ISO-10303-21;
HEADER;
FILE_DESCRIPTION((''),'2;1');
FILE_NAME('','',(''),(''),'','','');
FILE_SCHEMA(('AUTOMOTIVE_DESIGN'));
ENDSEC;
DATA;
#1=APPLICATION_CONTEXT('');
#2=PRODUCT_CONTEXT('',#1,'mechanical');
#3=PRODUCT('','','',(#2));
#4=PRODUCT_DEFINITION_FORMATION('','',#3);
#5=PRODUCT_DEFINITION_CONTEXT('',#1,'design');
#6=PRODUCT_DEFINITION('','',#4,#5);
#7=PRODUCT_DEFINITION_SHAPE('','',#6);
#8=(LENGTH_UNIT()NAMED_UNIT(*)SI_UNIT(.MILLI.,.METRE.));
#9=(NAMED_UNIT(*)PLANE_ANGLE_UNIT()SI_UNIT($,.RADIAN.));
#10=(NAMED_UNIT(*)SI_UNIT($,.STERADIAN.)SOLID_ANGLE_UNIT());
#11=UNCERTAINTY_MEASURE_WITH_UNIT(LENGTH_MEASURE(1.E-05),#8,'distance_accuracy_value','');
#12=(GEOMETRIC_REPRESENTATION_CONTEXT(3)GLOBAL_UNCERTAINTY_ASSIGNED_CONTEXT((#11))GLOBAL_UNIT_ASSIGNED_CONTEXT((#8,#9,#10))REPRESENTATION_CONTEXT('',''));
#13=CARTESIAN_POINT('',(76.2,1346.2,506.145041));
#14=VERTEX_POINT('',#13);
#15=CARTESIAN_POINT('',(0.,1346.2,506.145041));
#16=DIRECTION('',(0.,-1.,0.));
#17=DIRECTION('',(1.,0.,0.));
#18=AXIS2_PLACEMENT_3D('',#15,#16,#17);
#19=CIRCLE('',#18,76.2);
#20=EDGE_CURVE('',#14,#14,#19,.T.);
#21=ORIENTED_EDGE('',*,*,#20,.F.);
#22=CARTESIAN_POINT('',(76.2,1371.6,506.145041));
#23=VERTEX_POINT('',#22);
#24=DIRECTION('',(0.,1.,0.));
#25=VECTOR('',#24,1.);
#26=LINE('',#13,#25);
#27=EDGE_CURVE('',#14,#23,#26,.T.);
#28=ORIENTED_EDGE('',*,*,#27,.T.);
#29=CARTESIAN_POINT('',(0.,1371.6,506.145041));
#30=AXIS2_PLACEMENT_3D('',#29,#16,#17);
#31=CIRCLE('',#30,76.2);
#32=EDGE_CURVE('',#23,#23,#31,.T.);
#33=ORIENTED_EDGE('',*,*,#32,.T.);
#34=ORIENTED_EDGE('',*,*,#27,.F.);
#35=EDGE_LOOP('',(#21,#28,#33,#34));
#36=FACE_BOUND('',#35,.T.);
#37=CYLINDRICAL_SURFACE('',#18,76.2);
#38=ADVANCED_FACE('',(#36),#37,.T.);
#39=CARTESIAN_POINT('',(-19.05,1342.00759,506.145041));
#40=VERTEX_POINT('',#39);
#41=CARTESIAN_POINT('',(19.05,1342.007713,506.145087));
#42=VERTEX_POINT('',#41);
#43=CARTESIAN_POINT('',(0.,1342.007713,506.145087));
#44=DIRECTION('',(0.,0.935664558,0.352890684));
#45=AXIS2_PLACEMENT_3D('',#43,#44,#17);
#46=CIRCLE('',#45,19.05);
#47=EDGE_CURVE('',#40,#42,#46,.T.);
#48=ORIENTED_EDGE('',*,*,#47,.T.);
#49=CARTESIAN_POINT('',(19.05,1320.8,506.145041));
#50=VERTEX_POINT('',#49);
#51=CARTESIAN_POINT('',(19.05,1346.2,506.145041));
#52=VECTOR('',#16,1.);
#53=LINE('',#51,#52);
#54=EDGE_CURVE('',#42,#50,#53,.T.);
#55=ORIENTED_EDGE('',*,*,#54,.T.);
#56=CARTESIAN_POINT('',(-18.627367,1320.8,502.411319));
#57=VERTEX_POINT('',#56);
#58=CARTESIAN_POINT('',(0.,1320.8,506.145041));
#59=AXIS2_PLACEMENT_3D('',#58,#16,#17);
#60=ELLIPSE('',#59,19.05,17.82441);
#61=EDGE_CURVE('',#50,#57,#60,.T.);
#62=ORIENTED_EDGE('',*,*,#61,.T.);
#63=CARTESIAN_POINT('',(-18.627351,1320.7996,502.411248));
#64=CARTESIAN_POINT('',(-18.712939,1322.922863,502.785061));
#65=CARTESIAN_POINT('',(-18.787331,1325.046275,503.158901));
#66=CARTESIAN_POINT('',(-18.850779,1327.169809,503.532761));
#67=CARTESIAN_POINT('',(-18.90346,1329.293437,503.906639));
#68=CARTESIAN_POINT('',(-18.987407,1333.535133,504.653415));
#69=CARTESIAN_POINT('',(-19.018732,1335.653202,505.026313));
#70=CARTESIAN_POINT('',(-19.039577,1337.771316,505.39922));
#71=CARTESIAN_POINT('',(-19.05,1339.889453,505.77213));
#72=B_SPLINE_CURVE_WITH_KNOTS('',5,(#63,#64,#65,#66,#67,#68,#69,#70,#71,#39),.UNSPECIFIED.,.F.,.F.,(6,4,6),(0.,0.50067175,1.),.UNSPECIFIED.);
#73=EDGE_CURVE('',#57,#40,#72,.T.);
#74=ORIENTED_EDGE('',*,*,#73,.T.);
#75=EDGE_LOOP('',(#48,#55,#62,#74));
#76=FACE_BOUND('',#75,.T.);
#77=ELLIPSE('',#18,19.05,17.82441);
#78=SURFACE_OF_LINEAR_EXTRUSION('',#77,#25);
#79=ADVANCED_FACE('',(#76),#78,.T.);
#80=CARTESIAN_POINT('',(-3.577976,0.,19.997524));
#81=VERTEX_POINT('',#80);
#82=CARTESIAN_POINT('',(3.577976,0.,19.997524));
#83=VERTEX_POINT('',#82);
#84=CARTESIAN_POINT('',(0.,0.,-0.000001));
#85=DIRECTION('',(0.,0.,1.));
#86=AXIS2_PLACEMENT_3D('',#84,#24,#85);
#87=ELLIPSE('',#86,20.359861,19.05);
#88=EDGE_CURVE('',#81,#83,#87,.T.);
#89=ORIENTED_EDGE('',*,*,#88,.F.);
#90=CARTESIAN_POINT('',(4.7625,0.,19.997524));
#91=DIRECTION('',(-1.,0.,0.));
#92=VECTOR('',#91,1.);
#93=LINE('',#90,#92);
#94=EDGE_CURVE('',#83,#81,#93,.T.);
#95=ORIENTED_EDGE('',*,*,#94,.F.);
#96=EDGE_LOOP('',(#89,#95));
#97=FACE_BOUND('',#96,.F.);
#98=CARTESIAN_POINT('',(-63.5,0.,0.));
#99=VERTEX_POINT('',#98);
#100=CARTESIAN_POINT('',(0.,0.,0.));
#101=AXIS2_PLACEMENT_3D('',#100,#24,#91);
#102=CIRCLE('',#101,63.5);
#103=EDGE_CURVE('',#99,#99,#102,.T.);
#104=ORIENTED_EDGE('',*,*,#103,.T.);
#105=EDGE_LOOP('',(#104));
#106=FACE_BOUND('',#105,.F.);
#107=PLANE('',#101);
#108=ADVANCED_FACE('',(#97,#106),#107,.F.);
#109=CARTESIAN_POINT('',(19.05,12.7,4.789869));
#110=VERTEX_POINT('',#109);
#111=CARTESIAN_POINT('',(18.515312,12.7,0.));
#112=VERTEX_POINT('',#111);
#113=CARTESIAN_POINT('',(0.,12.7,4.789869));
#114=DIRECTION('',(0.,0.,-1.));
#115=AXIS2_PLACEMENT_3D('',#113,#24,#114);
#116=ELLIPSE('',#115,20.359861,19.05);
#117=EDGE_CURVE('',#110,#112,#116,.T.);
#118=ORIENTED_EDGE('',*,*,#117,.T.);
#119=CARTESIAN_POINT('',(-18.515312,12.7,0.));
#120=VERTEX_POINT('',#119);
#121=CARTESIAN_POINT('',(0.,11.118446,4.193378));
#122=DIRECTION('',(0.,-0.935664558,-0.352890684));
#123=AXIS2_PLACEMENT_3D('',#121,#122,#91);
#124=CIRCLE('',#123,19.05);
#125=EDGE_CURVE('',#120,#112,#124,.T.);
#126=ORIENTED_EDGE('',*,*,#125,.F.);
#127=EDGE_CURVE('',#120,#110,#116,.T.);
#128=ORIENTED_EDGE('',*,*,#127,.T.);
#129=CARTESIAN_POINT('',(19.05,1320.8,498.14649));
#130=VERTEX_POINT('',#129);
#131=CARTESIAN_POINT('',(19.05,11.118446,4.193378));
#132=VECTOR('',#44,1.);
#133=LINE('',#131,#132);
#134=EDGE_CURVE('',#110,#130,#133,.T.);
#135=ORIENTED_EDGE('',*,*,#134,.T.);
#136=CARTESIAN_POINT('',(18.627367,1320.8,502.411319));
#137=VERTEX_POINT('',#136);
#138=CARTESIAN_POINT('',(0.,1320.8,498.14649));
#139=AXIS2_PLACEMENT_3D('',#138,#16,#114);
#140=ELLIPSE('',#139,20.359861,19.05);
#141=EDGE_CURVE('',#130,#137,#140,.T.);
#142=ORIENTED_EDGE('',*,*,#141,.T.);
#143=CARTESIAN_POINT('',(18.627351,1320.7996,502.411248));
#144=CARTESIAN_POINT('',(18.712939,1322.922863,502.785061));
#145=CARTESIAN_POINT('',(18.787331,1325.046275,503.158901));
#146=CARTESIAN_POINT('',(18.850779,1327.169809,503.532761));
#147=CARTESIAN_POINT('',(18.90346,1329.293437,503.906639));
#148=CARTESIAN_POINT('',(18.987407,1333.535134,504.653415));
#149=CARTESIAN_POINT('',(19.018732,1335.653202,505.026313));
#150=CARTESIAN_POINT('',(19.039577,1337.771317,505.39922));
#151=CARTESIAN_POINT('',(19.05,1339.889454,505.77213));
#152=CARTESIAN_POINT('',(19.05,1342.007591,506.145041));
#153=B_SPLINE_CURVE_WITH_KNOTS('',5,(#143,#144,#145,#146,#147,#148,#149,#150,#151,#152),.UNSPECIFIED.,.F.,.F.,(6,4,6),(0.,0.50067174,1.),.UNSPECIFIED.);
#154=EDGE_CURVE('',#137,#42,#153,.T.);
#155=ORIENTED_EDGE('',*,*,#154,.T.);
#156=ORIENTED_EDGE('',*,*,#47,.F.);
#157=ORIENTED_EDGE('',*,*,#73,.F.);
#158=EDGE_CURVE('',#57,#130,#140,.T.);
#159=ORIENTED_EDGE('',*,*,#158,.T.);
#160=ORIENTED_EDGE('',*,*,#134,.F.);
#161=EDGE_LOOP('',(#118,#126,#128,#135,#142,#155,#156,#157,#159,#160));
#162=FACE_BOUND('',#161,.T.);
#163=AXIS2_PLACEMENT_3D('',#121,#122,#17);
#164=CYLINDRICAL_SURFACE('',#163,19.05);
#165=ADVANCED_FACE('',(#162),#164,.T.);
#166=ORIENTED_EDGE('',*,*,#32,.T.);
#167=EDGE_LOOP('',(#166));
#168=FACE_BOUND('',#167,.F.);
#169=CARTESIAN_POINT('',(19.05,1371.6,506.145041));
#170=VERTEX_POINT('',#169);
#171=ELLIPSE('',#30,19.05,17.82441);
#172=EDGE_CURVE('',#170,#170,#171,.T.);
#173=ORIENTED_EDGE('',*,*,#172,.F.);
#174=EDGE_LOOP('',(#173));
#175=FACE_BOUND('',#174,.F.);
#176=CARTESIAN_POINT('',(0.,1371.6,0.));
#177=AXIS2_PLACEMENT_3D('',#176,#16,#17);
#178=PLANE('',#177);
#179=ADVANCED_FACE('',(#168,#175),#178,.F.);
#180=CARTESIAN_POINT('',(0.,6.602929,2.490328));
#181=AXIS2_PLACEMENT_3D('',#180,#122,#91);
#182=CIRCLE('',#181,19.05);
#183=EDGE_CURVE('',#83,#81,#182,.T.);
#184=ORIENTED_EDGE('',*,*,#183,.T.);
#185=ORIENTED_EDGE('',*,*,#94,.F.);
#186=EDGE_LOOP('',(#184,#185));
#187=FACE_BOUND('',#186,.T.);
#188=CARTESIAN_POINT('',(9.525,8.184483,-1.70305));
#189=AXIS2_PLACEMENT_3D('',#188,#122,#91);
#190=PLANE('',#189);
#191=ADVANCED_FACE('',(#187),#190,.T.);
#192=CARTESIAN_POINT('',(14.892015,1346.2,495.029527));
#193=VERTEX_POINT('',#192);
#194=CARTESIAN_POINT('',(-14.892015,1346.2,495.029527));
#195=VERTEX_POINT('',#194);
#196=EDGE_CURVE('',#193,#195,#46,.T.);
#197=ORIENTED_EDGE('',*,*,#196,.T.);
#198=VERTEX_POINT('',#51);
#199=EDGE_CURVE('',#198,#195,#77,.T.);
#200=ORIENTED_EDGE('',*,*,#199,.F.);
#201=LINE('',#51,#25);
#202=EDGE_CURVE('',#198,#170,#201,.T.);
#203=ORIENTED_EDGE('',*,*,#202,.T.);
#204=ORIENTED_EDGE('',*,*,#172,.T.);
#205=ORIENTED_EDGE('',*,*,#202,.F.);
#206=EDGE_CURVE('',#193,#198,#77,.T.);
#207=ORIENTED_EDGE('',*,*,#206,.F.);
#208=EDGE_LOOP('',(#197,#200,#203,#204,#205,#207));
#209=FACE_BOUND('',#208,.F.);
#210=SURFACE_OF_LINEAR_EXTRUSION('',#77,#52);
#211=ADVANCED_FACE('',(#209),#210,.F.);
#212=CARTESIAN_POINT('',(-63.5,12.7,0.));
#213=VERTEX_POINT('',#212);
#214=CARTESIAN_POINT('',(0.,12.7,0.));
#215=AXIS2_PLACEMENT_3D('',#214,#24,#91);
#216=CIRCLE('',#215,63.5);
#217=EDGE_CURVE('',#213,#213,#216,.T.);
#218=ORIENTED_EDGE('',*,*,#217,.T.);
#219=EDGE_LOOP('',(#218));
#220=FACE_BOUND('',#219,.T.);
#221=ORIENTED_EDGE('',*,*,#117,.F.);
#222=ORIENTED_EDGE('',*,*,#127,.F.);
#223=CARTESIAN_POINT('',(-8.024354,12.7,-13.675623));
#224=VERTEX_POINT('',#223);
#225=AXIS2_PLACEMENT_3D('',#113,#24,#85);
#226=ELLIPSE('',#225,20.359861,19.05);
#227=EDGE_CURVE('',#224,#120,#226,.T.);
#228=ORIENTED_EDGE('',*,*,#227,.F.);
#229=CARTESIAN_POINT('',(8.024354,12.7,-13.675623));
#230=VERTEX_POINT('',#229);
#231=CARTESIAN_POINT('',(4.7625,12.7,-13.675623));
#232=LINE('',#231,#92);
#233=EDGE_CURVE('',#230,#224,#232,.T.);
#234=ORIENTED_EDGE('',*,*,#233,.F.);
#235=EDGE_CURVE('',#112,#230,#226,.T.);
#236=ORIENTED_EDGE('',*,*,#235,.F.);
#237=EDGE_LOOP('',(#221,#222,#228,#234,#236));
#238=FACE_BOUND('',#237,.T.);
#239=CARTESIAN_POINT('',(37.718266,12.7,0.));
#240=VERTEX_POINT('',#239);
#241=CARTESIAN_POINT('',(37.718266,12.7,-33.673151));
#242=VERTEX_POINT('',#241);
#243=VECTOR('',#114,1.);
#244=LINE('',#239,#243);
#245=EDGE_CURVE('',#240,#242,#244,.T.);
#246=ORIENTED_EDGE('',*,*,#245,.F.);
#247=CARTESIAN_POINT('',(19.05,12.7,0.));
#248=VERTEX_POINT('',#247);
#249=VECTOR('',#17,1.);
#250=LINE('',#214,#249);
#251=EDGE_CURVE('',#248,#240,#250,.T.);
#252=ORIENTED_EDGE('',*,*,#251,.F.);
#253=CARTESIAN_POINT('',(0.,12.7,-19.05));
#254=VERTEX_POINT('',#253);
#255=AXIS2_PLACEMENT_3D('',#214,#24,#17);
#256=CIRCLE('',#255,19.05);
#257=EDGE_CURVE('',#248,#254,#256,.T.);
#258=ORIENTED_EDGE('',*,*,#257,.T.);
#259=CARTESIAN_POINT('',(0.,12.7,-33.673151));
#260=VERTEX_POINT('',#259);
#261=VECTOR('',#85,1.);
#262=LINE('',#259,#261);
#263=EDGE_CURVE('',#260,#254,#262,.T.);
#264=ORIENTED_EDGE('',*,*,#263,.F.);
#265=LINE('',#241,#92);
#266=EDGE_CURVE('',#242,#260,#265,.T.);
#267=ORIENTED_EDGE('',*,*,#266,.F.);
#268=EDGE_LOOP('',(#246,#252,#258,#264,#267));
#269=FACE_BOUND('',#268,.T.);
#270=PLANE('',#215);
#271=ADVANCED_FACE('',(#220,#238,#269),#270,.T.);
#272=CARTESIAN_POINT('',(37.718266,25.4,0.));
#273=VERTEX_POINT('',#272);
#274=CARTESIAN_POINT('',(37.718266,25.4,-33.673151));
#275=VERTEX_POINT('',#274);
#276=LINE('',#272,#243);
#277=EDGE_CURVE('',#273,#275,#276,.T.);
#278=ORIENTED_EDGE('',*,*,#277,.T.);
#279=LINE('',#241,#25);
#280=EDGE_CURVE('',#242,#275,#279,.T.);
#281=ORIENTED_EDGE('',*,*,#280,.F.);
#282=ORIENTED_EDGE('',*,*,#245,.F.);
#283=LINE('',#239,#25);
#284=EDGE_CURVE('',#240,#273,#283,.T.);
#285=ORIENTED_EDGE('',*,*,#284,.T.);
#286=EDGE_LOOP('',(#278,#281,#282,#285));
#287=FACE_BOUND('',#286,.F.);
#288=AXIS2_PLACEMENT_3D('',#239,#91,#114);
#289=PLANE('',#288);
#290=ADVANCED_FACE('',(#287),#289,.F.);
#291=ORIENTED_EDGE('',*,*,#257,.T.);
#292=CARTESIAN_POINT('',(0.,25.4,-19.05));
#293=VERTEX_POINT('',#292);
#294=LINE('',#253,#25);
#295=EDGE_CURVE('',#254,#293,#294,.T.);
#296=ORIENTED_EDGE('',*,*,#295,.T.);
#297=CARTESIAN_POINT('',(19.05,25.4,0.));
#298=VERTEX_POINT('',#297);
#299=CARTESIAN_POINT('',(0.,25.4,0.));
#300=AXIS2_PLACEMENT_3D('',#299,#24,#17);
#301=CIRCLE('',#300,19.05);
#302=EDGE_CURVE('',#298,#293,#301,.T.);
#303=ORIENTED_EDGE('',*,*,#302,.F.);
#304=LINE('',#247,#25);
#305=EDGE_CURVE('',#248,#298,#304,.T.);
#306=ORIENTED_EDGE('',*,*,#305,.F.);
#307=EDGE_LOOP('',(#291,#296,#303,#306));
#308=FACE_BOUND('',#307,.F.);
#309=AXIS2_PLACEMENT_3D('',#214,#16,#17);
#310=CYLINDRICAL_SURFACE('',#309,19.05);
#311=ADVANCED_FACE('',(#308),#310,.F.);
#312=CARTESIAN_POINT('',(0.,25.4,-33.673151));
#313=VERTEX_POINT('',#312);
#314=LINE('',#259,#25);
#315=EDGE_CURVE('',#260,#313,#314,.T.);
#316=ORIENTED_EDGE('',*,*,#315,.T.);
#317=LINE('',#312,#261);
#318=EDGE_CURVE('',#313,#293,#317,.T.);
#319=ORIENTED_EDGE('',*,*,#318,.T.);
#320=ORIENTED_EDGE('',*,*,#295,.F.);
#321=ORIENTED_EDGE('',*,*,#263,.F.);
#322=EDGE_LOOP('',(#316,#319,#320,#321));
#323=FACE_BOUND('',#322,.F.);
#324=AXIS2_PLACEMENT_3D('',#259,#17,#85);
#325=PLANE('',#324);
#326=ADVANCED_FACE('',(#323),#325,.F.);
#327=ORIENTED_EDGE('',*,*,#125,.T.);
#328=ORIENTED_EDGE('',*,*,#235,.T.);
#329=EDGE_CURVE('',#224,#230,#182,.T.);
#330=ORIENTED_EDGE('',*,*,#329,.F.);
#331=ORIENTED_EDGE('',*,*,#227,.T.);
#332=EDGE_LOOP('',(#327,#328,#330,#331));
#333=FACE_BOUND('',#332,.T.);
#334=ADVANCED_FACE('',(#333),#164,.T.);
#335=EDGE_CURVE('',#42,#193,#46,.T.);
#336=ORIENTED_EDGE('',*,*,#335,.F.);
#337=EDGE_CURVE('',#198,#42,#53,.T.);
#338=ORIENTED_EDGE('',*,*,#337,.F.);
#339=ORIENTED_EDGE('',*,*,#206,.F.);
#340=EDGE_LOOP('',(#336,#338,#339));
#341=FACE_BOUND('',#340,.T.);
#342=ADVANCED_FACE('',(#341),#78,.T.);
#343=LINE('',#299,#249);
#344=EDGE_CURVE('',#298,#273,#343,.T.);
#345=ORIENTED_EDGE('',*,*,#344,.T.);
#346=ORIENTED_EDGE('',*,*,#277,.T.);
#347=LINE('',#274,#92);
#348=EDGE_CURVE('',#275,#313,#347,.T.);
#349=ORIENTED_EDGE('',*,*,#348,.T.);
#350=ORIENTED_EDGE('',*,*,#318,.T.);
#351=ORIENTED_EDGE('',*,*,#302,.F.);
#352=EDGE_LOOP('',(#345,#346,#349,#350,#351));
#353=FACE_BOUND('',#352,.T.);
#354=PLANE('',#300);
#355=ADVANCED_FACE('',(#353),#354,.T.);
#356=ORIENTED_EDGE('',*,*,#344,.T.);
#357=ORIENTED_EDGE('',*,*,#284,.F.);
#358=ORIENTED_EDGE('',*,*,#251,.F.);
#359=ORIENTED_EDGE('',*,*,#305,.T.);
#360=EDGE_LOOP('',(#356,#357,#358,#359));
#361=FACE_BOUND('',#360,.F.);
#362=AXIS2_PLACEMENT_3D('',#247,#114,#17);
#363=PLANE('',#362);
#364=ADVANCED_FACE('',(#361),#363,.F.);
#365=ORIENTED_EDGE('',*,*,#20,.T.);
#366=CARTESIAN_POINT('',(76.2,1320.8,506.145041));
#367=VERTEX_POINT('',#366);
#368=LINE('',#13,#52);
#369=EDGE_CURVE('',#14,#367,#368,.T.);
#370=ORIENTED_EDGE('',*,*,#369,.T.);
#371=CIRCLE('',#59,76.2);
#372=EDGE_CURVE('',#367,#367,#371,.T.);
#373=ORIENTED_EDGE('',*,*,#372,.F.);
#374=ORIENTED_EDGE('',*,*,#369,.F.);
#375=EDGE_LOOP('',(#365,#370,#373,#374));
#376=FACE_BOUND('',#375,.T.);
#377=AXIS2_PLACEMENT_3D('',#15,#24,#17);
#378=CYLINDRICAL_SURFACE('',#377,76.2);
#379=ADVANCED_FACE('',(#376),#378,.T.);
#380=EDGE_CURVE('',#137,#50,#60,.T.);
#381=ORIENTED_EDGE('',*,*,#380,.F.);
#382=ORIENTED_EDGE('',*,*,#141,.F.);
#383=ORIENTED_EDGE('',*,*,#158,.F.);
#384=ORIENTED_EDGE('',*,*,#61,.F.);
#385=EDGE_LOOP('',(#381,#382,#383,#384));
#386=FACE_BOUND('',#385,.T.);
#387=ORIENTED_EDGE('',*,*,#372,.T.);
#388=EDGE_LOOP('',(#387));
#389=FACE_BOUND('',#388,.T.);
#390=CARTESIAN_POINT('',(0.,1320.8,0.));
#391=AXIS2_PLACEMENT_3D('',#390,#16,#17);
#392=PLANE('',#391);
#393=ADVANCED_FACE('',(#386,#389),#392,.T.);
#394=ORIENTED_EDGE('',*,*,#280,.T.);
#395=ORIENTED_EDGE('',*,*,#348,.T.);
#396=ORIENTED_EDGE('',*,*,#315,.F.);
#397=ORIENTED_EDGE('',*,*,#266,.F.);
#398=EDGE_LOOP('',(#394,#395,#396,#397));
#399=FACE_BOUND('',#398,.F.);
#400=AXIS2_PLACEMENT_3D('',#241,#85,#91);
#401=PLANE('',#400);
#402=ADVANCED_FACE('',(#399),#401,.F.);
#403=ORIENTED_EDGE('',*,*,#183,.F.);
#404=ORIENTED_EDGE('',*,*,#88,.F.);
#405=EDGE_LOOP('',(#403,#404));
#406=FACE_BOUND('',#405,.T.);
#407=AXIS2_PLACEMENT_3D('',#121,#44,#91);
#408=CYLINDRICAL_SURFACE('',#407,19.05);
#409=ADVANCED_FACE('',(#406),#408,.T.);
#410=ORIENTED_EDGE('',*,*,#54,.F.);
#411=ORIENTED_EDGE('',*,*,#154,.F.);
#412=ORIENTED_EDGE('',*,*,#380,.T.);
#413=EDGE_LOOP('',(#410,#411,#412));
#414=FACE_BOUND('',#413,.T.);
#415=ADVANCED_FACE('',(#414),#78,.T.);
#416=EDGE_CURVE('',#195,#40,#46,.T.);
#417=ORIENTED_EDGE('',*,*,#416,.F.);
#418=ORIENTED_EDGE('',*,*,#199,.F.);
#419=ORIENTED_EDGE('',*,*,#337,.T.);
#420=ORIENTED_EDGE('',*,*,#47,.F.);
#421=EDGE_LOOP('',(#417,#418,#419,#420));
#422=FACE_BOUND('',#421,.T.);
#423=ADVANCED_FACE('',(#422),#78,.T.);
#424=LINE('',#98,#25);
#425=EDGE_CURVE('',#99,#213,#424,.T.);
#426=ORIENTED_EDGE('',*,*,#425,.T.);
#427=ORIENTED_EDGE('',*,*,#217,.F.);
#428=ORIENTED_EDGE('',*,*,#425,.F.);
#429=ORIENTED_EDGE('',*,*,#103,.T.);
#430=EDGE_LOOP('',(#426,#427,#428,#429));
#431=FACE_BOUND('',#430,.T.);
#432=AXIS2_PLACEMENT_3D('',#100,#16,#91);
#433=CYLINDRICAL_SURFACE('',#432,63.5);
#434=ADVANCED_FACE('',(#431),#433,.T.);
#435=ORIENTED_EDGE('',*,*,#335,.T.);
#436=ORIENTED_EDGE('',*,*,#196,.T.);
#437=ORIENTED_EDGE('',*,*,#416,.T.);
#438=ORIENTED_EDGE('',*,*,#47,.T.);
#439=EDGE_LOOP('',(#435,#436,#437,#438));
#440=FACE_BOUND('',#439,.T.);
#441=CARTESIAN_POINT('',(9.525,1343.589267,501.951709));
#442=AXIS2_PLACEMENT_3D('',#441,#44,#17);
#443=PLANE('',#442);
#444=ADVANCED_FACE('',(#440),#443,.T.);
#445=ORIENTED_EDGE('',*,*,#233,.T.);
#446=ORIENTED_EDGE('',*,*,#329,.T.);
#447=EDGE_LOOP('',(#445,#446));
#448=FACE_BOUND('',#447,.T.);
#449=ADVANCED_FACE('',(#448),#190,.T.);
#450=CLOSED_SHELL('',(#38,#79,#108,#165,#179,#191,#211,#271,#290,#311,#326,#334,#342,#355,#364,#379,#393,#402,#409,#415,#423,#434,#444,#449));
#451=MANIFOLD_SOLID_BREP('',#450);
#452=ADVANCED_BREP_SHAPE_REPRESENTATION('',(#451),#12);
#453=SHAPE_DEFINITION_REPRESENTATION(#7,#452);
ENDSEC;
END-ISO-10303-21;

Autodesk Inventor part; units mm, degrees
ref_plane "YZ Plane" through (0, 0, 0) normal (1, 0, 0) x (0, 1, 0)
ref_plane "XZ Plane" through (0, 0, 0) normal (0, 1, 0) x (-1, 0, 0)
ref_plane "XY Plane" through (0, 0, 0) normal (0, 0, 1) x (1, 0, 0)
sketch "Sketch1" plane through (0, 0, 0) normal (0, 1, 0) x (-1, 0, 0)
  circle A0 centre (0, 0) radius 63.5
  dimension "d0" = 127
extrude "Extrusion1" add sketch "Sketch1" along normal blind 12.7
sketch "Sketch2" plane through (0, 12.7, 0) normal (0, 1, 0) x (1, 0, 0)
  circle A0 centre (0, 0) radius 19.05
  circle A1 centre (0, 0) radius 63.5
  line L0 (0, 0) -> (37.718266, 0)
  line L1 (37.718266, 0) -> (37.718266, 33.673151)
  line L2 (37.718266, 33.673151) -> (0, 33.673151)
  line L3 (0, 33.673151) -> (0, 0)
  point P0 (63.5, 0)
  point P1 (0, 19.05)
  point P2 (19.05, 0)
  dimension "d3" = 38.1
extrude "Extrusion2" add sketch "Sketch2" along normal blind 12.7 contours A0 L3 L2 L1 L0
ref_plane "Work Plane1" through (9.525, 12.7, 0) normal (0, -0.9356646, -0.3528907) x (-1, 0, 0)
sketch "Sketch3" plane through (9.525, 12.7, 0) normal (0, -0.9356646, -0.3528907) x (-1, 0, 0)
  circle A0 centre (9.525, -4.481711) radius 19.05
  dimension "d6" = 38.1
extrude "Extrusion3" add sketch "Sketch3" along normal blind 4.826
sketch "Sketch4" plane through (9.525, 12.7, 0) normal (0, 0.9356646, 0.3528907) x (1, 0, 0)
  circle A0 centre (-9.525, -4.481711) radius 19.05
extrude "Extrusion4" add sketch "Sketch4" along normal blind 1422.4
ref_plane "Work Plane2" through (0, 1346.2, 0) normal (0, -1, 0) x (1, 0, 0)
sketch "Sketch5" plane through (0, 1346.2, 0) normal (0, -1, 0) x (1, 0, 0)
  ellipse E0 centre (0, 506.145041) end of major axis (19.05, 506.145041) minor radius 17.82441
  circle A0 centre (0, 506.145041) radius 76.2
  point P0 (0, 0)
  dimension "d12" = 152.4
extrude "Extrusion5" add sketch "Sketch5" along normal blind 25.4 and the other way blind 25.4
properties part number "Legs" material "Aluminum 6061"
